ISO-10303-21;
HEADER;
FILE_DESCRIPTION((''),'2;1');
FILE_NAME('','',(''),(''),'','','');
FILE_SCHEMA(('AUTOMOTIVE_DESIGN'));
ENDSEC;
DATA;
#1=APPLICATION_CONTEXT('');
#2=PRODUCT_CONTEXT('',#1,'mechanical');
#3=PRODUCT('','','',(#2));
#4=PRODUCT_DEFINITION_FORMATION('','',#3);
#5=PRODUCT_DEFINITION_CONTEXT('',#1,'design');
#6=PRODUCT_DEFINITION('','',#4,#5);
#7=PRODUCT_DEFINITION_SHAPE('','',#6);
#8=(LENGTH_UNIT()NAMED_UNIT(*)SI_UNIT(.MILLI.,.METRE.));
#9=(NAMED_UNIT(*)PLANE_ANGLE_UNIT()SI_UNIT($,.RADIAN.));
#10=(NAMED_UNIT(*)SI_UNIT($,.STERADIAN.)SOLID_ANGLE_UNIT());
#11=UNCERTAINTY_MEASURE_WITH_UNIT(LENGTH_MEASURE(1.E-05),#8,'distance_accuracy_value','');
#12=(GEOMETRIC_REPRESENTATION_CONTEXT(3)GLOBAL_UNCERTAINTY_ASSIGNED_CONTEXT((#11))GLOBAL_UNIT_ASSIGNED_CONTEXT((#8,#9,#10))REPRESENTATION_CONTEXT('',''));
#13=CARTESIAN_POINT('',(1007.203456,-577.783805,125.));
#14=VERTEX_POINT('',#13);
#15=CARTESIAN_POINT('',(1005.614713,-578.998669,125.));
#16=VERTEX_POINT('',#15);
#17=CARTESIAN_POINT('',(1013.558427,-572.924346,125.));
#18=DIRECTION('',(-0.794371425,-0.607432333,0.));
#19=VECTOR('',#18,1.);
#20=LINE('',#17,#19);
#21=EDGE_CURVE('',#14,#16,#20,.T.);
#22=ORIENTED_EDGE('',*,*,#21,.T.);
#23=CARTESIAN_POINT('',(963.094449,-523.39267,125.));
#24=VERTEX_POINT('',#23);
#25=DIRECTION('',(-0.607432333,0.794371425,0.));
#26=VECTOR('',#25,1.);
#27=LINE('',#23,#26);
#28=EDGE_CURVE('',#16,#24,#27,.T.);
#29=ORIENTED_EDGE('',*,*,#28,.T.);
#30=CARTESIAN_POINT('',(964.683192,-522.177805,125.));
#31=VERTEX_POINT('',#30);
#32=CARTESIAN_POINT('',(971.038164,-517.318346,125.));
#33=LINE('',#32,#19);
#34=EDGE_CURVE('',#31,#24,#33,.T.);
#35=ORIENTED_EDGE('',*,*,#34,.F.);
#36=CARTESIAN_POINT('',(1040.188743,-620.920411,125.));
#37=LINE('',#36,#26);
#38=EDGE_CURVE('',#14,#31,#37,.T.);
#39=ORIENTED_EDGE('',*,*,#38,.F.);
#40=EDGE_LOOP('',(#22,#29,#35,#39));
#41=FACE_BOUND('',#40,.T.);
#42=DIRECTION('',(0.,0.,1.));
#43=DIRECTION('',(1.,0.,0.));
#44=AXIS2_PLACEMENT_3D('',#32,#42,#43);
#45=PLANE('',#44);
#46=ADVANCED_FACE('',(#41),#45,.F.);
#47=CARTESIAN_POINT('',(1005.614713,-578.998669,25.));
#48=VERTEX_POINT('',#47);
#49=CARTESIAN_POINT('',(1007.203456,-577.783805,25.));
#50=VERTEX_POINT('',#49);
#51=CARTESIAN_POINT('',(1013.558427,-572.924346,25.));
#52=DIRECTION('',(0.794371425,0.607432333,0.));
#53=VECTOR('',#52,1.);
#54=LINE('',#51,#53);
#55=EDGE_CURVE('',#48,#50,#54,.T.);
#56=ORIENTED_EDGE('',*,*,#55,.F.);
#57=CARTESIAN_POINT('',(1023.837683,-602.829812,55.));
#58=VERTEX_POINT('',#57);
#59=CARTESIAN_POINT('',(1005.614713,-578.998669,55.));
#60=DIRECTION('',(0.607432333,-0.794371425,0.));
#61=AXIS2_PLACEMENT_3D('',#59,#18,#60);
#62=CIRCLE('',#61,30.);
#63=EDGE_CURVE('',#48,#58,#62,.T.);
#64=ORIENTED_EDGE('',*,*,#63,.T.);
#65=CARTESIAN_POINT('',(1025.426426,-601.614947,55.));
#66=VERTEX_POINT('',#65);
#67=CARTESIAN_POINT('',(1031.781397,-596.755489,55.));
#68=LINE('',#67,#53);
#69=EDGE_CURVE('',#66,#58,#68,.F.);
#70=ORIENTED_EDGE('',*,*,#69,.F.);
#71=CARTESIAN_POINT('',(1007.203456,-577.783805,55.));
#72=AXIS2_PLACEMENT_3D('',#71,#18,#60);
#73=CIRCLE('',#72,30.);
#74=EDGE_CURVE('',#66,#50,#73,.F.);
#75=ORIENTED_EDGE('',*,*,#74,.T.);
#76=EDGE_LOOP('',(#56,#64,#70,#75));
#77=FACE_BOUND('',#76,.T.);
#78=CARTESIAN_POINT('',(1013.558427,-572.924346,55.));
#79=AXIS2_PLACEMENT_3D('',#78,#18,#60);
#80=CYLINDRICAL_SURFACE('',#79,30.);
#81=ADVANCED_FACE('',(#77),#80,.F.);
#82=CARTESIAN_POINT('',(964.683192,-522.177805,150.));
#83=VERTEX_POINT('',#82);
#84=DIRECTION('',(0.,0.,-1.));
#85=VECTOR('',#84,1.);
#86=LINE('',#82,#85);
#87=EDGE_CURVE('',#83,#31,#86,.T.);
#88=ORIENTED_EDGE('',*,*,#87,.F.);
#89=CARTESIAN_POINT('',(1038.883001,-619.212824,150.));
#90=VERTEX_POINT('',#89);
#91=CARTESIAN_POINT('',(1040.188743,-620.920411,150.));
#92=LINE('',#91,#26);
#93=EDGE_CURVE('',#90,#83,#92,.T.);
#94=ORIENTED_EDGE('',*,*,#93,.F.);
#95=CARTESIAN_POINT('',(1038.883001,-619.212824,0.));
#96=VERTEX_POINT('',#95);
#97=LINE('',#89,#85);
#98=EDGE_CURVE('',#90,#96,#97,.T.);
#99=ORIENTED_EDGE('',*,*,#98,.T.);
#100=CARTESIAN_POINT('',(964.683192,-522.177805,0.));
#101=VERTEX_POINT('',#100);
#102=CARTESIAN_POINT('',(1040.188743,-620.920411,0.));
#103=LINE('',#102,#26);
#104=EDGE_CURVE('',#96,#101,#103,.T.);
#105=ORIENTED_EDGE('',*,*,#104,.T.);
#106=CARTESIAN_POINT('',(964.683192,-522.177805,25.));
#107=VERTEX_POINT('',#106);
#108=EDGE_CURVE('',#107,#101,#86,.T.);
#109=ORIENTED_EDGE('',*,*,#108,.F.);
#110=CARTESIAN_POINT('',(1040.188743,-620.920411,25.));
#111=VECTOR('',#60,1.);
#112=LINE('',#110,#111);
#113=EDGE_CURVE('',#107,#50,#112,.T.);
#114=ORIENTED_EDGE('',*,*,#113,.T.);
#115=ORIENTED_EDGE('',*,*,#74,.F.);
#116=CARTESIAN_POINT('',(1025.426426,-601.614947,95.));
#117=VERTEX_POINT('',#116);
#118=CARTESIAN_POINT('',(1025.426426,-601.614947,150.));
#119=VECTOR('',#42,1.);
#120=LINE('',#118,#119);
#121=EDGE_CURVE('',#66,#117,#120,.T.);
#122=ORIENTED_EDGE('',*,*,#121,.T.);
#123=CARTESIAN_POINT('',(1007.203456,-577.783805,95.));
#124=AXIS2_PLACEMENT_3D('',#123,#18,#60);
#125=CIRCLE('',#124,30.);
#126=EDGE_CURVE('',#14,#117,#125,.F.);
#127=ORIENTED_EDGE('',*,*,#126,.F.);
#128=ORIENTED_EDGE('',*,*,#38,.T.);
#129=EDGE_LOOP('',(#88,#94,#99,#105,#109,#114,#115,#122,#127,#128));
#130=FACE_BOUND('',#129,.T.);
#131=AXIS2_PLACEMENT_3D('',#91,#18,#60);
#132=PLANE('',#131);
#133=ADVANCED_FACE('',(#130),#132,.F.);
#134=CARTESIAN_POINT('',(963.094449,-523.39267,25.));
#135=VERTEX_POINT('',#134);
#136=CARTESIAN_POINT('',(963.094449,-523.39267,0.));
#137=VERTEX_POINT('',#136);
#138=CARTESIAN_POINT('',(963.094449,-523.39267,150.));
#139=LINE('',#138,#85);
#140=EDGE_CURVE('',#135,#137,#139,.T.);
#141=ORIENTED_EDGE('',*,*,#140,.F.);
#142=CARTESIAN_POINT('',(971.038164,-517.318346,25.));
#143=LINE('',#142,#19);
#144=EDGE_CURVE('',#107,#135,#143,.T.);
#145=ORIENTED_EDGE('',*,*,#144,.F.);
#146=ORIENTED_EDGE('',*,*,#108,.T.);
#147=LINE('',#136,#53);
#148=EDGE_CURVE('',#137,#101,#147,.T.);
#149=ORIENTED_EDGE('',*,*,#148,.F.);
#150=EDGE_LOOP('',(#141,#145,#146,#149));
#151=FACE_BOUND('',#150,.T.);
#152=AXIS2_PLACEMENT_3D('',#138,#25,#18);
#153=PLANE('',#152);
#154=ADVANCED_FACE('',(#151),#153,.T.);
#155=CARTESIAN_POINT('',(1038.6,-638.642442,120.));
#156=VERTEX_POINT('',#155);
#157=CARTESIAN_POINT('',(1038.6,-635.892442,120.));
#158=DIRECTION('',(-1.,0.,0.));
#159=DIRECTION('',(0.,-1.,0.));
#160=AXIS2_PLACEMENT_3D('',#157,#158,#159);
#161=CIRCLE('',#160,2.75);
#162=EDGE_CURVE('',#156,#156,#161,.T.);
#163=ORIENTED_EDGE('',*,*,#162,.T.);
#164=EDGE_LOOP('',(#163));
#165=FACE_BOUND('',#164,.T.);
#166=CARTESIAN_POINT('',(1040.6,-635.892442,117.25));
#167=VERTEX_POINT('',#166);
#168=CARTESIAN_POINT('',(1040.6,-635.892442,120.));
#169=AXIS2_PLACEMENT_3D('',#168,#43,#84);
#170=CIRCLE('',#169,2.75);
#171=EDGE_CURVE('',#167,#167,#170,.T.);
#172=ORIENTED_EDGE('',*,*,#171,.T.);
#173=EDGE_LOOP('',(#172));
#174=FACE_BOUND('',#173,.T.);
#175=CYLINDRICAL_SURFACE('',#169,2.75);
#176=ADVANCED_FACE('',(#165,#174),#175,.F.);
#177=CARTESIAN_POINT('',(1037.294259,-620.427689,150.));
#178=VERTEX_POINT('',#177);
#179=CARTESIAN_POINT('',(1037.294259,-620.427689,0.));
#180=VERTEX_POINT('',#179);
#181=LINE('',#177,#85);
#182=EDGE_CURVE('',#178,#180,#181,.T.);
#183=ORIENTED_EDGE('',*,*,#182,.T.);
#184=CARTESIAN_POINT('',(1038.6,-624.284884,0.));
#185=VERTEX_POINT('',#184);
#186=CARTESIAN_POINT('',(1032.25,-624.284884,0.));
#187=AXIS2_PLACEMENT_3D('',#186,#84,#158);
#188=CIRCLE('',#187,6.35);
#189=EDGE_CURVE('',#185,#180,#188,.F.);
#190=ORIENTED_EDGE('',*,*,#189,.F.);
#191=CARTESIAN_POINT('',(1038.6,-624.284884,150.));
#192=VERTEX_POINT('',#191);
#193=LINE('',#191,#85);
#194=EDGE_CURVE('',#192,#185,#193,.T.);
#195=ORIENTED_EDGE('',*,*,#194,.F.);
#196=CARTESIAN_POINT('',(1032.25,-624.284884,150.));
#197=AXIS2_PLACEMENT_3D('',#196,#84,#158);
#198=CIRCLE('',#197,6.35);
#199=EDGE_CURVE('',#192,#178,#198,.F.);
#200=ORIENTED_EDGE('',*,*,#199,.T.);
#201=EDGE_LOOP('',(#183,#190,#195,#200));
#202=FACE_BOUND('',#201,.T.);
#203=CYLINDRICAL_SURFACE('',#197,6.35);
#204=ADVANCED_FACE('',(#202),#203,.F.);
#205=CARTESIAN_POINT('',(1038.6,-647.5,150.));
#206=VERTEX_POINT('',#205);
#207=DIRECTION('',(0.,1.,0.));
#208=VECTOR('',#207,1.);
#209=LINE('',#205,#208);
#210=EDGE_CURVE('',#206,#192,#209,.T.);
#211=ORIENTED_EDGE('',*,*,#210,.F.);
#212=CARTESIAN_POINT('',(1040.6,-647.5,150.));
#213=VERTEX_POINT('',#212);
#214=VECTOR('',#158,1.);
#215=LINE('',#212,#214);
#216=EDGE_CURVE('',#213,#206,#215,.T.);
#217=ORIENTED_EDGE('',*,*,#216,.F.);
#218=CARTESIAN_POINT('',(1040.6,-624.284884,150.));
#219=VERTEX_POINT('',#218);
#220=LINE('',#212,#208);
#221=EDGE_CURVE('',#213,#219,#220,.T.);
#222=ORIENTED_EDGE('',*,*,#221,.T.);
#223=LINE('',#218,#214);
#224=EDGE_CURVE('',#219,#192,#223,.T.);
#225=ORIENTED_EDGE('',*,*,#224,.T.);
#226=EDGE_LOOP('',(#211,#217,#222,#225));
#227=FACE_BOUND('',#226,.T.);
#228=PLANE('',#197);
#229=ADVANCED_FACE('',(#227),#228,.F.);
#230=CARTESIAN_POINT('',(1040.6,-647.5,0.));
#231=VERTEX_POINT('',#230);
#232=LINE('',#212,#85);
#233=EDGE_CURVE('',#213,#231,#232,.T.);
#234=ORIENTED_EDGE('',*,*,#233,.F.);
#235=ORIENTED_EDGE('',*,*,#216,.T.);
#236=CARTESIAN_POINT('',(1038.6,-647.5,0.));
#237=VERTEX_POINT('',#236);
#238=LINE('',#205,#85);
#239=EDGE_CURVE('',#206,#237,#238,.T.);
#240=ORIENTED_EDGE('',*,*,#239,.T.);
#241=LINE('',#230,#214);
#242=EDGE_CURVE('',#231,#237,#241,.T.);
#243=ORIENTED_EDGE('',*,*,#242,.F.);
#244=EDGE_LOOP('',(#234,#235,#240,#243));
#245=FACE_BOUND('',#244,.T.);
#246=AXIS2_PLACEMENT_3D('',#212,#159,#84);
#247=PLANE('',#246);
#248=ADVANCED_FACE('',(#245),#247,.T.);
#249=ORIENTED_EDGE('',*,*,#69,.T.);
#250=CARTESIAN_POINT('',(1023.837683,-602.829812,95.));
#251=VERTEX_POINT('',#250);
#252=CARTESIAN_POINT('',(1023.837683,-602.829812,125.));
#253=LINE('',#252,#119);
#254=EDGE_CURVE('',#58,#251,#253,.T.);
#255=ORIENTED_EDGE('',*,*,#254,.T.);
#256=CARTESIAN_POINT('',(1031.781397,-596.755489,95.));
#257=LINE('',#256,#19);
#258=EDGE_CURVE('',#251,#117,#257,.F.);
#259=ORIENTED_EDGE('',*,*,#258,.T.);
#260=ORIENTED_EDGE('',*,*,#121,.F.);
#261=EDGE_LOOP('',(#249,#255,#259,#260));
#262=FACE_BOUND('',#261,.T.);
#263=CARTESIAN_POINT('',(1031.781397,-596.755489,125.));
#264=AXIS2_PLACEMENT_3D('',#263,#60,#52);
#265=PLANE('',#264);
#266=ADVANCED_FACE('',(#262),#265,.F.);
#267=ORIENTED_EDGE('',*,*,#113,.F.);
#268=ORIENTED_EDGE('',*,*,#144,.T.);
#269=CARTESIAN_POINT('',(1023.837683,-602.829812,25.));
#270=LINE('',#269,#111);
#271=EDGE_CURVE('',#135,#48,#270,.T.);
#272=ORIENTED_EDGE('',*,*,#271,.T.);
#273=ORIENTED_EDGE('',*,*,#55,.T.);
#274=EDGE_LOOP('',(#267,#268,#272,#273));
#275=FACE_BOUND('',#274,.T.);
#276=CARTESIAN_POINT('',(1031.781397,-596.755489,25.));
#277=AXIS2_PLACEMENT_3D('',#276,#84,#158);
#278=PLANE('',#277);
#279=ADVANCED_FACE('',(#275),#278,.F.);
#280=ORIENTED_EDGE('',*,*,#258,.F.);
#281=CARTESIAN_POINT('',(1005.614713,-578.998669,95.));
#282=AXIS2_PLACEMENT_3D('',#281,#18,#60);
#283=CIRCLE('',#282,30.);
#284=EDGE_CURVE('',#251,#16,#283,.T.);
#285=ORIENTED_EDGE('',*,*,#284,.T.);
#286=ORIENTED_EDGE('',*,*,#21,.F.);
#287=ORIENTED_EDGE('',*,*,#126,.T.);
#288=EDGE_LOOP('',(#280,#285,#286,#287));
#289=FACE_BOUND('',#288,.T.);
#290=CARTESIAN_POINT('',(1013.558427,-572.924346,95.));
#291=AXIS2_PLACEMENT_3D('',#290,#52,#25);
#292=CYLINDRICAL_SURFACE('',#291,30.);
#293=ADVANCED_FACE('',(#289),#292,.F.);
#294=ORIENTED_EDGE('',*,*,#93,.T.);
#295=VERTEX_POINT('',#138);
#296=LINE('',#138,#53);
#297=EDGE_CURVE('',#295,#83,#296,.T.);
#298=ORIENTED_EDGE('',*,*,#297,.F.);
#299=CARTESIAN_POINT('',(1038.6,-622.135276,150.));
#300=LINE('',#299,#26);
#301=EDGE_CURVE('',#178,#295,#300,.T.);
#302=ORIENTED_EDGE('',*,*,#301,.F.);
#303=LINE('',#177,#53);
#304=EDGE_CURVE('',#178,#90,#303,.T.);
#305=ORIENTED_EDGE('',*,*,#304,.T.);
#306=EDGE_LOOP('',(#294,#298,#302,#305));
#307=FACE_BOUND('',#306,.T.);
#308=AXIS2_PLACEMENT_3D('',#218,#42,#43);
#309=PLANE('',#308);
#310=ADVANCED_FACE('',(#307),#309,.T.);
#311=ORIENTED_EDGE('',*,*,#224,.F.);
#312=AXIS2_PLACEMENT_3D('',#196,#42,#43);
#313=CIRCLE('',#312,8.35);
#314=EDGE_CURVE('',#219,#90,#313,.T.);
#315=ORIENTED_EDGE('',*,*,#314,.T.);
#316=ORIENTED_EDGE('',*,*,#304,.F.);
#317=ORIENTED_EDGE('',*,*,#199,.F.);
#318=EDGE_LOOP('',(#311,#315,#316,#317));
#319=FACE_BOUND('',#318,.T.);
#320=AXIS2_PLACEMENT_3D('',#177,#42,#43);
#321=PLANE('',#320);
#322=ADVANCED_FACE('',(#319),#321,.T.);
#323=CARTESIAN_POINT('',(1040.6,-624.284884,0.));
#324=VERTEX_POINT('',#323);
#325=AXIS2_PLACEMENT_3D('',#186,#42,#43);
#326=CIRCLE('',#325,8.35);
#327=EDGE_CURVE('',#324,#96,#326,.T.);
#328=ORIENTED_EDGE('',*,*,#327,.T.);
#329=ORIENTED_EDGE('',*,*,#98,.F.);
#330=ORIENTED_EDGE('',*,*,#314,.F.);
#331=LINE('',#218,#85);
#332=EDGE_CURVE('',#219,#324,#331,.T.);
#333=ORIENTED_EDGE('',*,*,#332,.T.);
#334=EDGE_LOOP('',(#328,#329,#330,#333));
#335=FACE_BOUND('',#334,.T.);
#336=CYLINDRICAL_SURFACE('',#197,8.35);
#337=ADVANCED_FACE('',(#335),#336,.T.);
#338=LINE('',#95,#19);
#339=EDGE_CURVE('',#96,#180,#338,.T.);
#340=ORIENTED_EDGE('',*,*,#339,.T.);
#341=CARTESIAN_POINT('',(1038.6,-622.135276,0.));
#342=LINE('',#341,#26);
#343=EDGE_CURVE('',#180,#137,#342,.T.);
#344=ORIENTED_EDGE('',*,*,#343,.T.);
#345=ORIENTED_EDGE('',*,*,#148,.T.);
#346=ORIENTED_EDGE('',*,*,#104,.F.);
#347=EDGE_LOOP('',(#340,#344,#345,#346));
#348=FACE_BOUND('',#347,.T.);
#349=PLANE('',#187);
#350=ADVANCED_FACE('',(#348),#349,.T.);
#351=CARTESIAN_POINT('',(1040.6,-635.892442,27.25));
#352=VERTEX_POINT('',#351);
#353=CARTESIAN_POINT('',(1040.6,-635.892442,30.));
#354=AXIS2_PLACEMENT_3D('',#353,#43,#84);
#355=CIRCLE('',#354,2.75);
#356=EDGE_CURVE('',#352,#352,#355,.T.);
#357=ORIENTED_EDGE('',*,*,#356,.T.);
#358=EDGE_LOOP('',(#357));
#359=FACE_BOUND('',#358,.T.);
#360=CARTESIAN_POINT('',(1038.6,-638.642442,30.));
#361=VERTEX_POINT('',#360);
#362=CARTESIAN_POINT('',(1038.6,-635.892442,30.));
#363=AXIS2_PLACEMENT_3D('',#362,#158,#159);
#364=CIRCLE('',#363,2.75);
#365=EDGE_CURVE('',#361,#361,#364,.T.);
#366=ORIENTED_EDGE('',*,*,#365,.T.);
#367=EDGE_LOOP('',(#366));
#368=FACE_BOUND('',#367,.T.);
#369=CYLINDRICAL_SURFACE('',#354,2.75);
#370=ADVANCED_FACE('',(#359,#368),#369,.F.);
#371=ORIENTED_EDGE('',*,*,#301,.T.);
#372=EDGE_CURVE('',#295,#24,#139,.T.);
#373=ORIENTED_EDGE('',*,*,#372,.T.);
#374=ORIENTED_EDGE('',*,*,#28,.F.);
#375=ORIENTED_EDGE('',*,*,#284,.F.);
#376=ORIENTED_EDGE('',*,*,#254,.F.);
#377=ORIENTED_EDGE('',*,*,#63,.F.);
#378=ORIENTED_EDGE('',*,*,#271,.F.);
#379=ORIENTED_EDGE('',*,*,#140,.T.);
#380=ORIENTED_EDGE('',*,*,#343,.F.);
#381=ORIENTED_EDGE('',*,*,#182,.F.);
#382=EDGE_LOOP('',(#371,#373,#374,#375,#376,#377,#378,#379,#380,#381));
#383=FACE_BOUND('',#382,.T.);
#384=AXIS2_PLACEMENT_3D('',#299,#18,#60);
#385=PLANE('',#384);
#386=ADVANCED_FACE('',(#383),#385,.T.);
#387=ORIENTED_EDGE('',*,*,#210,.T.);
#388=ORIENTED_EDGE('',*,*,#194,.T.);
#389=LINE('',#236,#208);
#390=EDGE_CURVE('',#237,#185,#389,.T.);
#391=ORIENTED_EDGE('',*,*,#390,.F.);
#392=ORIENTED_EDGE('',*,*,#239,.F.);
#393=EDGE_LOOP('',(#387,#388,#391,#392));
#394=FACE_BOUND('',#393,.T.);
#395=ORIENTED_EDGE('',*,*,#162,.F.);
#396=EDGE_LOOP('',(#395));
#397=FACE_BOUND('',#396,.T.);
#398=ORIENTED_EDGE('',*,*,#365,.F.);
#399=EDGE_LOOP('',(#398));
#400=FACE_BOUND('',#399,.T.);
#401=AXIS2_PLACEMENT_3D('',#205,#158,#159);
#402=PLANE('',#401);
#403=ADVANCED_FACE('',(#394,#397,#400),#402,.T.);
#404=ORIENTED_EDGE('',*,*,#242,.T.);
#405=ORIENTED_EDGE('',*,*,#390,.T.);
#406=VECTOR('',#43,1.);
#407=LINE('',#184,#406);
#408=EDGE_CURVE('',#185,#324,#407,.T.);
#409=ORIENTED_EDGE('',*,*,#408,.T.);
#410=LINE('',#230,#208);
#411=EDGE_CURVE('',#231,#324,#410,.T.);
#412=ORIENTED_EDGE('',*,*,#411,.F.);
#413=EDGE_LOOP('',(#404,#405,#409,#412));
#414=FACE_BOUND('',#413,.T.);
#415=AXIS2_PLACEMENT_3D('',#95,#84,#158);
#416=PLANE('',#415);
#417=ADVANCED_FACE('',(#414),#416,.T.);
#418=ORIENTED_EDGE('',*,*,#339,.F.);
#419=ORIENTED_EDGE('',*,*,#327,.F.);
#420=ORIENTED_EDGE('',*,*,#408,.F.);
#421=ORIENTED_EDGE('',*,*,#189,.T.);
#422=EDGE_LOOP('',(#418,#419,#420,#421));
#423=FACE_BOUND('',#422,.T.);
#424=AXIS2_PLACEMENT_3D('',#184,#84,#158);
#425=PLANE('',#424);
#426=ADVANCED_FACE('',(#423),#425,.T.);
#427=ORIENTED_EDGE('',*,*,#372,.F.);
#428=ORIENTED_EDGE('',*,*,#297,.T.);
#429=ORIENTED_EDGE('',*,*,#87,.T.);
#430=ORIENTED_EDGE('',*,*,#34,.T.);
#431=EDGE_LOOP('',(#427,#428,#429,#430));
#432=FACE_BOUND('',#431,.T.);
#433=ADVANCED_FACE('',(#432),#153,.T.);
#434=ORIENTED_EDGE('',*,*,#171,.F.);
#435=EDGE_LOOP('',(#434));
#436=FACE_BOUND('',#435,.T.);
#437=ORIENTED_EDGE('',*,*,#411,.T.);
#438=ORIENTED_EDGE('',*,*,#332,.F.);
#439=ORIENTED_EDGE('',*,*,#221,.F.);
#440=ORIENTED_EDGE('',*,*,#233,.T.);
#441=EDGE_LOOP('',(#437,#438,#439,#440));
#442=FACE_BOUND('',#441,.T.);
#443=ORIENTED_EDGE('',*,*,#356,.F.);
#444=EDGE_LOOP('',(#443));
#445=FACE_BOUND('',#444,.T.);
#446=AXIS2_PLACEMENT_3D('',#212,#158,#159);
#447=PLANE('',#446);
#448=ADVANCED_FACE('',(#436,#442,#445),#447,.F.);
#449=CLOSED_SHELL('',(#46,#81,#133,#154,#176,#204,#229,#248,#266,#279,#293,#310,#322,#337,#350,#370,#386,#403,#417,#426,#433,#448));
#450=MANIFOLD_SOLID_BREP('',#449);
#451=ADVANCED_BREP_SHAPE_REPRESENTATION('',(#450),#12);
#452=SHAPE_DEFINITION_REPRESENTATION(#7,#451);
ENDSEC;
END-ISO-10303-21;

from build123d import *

# Parameters (mm, degrees)
ODGI_CIE_BAZOWE1_DEPTH     = 150
SZKIC8_W                   = 100
SZKIC8_H                   = 100
WYTNIJ_WYCI_GNI_CIE3_DEPTH = 10
ZAOKR_GLENIE3_R            = 30
ZAOKR_GLENIE4_R            = 30
OTW_R_POD_RUB_M51_D        = 5.5
OTW_R_POD_RUB_M51_DEPTH    = 14
OTW_R_POD_RUB_M51_TIP      = 1.652366702


# Sheet-metal steps are written as plain solids
with BuildPart() as part:
    # Szkic1 → Odgięcie bazowe1 (new body)
    with BuildSketch(Plane.XY):
        with BuildLine():
            Line((1038.6, -647.5), (1038.6, -624.284884098))
            ThreePointArc((1038.6, -624.284884098), (1038.264712868, -622.248777737), (1037.294258546, -620.427688781))
            Line((1037.294258546, -620.427688781), (963.094449397, -523.392669649))
            Line((963.094449397, -523.392669649), (964.683192246, -522.177804982))
            Line((964.683192246, -522.177804982), (1038.883001396, -619.212824114))
            ThreePointArc((1038.883001396, -619.212824114), (1040.159110622, -621.607484395), (1040.6, -624.284884098))
            Line((1040.6, -624.284884098), (1040.6, -647.5))
            Line((1040.6, -647.5), (1038.6, -647.5))
        make_face()
    extrude(amount=ODGI_CIE_BAZOWE1_DEPTH)

    # Szkic8 → Wytnij-wyciągnięcie3 (cut)
    with BuildSketch(Plane(origin=(355.1865636, 271.600659919, 0), x_dir=(0, 0, 1), z_dir=(-0.7943714246171976, -0.607432333475626, 0))):
        with Locations((75, -1050.782889378)):
            Rectangle(SZKIC8_W, SZKIC8_H)
    extrude(amount=-WYTNIJ_WYCI_GNI_CIE3_DEPTH, mode=Mode.SUBTRACT)

    # Zaokrąglenie3
    zaokr_glenie3_edges = [part.edges().sort_by_distance(p)[0] for p in [
        (1024.632054169, -602.222379777, 125),
    ]]
    fillet(zaokr_glenie3_edges, radius=ZAOKR_GLENIE3_R)

    # Zaokrąglenie4
    zaokr_glenie4_edges = [part.edges().sort_by_distance(p)[0] for p in [
        (1024.632054169, -602.222379777, 25),
    ]]
    fillet(zaokr_glenie4_edges, radius=ZAOKR_GLENIE4_R)

    # Otwór pod śrubę M51
    with Locations(Plane(origin=(1040.6, 0, 0), x_dir=(0, 0, -1), z_dir=(1, 0, 0))):
        with Locations((-30, -635.892442049), (-120, -635.892442049)):
            Hole(OTW_R_POD_RUB_M51_D / 2, depth=OTW_R_POD_RUB_M51_DEPTH)
            with Locations((0, 0, -(OTW_R_POD_RUB_M51_DEPTH + OTW_R_POD_RUB_M51_TIP / 2))):  # 118° drill point
                Cone(0, OTW_R_POD_RUB_M51_D / 2, OTW_R_POD_RUB_M51_TIP, mode=Mode.SUBTRACT)


solid = part.part
